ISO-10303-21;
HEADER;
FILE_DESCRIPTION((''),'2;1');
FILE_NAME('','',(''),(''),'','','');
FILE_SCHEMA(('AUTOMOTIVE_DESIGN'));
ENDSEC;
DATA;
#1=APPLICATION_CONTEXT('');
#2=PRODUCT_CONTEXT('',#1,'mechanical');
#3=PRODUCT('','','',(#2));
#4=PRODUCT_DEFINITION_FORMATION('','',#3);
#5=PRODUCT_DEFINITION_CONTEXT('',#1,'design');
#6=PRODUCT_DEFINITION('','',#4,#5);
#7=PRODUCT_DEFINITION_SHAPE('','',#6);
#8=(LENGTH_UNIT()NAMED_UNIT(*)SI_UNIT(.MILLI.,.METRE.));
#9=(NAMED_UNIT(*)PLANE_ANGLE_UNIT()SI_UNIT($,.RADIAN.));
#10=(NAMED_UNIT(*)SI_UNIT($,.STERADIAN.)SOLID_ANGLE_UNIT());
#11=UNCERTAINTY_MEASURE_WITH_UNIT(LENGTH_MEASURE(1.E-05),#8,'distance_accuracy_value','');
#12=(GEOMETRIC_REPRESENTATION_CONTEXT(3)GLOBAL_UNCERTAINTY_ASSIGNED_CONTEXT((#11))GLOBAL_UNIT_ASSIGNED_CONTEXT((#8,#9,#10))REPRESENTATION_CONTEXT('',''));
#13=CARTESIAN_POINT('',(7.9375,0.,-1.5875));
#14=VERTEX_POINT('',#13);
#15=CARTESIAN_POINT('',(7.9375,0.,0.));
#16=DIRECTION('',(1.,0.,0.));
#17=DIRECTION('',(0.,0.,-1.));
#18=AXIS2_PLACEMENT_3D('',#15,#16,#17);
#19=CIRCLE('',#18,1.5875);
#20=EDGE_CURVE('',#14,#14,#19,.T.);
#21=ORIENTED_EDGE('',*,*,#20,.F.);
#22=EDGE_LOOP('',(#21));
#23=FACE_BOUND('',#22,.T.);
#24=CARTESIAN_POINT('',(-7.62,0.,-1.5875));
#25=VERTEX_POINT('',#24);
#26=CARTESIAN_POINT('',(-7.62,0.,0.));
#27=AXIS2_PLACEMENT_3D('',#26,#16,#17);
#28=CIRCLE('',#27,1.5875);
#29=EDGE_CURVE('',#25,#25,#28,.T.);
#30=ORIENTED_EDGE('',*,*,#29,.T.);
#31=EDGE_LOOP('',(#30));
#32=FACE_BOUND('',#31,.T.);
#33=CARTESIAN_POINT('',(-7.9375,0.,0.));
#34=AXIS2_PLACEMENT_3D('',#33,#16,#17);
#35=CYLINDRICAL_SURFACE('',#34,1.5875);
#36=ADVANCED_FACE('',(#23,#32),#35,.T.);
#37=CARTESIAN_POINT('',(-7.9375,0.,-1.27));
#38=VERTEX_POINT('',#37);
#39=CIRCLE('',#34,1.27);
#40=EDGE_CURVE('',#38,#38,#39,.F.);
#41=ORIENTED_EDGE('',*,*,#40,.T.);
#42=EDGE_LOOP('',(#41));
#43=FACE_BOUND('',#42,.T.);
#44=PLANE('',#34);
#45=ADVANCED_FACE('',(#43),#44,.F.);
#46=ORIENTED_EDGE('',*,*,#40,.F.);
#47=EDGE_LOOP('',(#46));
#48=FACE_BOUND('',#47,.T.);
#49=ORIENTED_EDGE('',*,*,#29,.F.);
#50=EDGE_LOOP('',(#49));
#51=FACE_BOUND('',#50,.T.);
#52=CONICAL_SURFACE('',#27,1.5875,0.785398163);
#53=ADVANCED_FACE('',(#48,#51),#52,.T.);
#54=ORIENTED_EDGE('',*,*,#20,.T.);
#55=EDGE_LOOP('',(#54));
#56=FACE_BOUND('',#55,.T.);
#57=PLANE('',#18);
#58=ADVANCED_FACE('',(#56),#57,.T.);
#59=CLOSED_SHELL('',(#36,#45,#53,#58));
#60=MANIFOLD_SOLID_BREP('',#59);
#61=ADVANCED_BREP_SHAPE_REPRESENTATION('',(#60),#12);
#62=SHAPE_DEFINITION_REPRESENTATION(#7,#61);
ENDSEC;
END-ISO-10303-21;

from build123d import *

# Parameters (mm, degrees)
EXTRUDE1_DEPTH        = 7.9375
EXTRUDE1_DEPTH_BACK   = 7.9375
SKETCH2_R             = 1.5875
CHAMFER1_SIZE         = 0.3175
DELETEFACE1_START     = 7.6199999
DELETEFACE1_OUTLINE_R = 1.5875
DELETEFACE1_DEPTH     = 0.3175001


# Read off the part's stored shape, not the designer's step: DeleteFace1
with BuildPart() as part:
    # Sketch2 → Extrude1 (new, two sides: drawn at the far end of the back side and taken through both)
    with BuildSketch(Plane(origin=(0, 0, 0), x_dir=(0, 0, -1), z_dir=(1, 0, 0)).offset(-EXTRUDE1_DEPTH_BACK)):
        Circle(SKETCH2_R)
    extrude(amount=EXTRUDE1_DEPTH + EXTRUDE1_DEPTH_BACK)

    # Chamfer1
    chamfer1_edges = [part.edges().sort_by_distance(p)[0] for p in [
        (-7.9375, 0, 1.5875),
        (7.9375, 0, 1.5875),
    ]]
    chamfer(chamfer1_edges, length=CHAMFER1_SIZE)

    # DeleteFace1 outline → DeleteFace1 (add)
    with BuildSketch(Plane.YZ.offset(DELETEFACE1_START)):
        Circle(DELETEFACE1_OUTLINE_R)
    extrude(amount=DELETEFACE1_DEPTH)


solid = part.part
